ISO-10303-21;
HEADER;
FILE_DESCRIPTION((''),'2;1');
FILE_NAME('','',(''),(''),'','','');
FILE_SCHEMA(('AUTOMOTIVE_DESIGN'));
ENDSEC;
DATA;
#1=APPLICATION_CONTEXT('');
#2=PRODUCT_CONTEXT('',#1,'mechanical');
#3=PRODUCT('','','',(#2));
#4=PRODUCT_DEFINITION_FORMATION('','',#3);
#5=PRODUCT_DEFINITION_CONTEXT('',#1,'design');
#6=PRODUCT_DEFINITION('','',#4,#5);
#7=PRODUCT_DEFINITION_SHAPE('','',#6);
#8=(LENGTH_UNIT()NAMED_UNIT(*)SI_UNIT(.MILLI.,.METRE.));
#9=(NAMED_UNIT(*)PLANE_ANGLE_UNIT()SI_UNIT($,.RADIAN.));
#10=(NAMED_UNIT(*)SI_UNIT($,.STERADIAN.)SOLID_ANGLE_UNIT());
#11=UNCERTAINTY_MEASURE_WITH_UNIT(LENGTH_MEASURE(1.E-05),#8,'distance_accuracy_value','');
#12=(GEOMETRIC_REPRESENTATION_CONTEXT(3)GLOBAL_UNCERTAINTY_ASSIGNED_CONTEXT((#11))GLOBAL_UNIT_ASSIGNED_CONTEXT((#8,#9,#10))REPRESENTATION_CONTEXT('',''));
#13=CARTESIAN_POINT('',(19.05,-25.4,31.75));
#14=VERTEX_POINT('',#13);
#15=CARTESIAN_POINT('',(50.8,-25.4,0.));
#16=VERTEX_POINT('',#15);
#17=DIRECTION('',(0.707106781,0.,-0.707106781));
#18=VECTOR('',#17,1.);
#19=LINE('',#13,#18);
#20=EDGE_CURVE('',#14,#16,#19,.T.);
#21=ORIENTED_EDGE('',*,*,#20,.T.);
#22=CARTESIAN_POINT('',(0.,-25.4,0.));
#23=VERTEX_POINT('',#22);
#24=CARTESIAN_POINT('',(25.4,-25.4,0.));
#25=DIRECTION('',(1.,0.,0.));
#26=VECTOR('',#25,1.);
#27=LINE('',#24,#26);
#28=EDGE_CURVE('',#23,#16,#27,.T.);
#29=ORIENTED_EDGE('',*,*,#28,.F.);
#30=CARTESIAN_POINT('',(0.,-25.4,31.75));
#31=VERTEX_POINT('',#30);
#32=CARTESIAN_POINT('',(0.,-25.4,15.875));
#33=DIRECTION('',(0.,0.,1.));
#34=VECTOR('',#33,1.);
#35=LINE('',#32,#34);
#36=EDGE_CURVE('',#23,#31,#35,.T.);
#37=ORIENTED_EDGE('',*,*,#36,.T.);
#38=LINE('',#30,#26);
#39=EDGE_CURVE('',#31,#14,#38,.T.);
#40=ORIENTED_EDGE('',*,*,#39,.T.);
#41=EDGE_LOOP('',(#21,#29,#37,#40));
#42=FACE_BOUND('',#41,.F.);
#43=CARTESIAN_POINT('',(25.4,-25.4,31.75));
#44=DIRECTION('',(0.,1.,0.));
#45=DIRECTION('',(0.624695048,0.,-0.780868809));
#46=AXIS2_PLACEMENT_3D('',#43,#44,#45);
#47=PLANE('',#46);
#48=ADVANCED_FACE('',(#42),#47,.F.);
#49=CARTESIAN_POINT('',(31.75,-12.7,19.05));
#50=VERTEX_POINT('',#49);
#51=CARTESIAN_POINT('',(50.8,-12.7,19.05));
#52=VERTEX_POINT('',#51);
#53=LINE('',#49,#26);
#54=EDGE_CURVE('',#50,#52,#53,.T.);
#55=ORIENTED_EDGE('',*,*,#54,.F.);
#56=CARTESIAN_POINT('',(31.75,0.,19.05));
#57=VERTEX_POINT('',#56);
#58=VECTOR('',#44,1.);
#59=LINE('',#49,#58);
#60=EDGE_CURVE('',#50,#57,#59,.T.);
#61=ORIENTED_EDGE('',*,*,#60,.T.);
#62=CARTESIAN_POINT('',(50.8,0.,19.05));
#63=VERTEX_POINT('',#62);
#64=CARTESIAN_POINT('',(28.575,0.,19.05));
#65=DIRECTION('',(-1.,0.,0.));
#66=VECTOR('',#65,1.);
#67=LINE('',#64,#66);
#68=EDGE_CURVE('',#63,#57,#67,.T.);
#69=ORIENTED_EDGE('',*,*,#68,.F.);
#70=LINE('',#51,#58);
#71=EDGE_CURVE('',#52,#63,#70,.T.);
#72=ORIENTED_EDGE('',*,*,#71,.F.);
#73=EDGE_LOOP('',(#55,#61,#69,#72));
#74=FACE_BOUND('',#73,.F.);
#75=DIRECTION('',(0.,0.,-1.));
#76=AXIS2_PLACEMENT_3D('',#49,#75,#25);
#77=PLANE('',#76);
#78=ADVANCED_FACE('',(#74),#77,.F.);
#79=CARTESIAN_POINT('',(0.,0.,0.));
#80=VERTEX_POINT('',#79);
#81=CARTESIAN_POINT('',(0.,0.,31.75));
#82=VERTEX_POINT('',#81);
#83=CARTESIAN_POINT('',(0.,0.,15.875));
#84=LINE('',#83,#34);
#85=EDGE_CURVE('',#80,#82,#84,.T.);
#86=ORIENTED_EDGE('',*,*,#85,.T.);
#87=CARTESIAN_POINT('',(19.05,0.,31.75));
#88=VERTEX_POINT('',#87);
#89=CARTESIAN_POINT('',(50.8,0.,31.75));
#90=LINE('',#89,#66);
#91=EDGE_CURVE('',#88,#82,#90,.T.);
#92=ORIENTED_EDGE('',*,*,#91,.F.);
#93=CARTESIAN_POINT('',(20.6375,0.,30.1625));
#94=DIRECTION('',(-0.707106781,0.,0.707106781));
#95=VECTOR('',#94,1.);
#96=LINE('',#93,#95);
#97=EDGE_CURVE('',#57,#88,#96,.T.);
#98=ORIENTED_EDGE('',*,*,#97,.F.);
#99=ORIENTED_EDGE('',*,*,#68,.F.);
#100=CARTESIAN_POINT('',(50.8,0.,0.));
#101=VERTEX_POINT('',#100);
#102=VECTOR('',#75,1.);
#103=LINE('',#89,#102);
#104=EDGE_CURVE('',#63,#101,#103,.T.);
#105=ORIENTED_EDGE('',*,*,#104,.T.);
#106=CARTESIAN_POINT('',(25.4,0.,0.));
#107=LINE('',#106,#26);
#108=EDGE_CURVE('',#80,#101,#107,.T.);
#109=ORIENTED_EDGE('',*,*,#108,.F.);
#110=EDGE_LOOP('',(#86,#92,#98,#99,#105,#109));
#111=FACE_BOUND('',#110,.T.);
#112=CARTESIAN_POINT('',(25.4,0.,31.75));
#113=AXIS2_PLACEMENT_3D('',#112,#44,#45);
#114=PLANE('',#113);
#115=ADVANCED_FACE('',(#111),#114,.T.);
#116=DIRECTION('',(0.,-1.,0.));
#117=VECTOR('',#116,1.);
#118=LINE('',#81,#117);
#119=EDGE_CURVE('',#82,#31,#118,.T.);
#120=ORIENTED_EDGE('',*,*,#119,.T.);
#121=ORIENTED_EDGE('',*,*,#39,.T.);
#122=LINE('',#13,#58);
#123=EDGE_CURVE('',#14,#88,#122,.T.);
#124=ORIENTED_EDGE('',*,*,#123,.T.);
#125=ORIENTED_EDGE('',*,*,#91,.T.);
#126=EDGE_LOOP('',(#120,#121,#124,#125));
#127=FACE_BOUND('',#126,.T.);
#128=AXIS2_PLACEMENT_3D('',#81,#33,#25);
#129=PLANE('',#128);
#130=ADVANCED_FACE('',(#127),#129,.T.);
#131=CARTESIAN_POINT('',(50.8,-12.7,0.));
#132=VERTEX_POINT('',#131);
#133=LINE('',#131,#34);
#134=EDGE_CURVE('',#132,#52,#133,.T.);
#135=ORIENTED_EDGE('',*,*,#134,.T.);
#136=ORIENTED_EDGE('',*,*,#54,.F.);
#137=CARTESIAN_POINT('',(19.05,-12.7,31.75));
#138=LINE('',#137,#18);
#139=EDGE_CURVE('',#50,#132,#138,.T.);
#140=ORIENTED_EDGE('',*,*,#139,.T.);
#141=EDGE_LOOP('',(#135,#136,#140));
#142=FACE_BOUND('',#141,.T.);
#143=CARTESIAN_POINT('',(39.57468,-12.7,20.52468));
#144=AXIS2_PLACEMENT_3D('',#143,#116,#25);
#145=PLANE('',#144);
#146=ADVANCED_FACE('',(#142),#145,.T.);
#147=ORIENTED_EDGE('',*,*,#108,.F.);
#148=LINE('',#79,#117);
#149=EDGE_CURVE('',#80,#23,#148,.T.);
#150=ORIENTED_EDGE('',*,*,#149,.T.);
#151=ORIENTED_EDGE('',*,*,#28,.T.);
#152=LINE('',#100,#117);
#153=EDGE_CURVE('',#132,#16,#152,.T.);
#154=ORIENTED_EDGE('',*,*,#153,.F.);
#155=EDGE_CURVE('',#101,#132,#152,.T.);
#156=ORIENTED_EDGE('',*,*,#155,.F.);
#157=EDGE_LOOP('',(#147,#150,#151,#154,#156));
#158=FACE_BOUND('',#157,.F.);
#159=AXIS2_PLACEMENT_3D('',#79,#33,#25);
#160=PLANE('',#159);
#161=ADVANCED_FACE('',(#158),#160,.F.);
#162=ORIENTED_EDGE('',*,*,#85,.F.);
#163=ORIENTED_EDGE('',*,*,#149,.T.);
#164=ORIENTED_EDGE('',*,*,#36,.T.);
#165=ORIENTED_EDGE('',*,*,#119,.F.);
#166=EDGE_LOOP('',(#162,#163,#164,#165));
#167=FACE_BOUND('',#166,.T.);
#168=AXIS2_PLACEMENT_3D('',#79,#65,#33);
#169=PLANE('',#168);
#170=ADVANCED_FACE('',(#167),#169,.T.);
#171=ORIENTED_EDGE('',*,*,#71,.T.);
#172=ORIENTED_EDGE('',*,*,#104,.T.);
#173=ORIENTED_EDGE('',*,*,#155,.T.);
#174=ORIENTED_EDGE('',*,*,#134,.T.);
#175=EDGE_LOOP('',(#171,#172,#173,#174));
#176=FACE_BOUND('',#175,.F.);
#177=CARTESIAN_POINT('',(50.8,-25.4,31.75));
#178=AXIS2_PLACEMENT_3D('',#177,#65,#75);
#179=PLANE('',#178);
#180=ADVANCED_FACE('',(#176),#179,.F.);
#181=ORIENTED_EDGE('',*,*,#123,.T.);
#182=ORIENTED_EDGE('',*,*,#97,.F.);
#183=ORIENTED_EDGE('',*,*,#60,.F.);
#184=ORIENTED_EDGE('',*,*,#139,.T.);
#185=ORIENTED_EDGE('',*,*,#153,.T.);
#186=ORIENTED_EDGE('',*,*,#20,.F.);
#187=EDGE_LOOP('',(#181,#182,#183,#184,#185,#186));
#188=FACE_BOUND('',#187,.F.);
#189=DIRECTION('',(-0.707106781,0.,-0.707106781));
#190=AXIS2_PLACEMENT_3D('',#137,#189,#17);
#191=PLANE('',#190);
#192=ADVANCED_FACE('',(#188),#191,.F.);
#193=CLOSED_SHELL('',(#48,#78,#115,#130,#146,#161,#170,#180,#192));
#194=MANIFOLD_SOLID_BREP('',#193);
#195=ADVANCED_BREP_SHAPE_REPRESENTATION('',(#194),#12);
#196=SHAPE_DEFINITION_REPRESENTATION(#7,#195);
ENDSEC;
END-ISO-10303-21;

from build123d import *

# Parameters (mm, degrees)
F0_W      = 50.8
F0_H      = 31.75
F1_DEPTH  = 25.4
F3_DEPTH  = 25.4
F4_DEPTH  = 25.4
F6_DEPTH  = 25.4
F8_DEPTH  = 12.7
F10_DEPTH = 25.4


# Not quite as in the source:
# - a feature names something its author has since deleted; it is built from what else it names


with BuildPart() as f1:
    # F0 (on Front) → F1 (new body)
    with BuildSketch(Plane.XZ):
        with Locations((25.4, 15.875)):
            Rectangle(F0_W, F0_H)
    extrude(amount=F1_DEPTH)

    # F2 (on face) → F3 (cut)
    with BuildSketch(Plane.XZ.offset(25.4)):
        Polygon((25.4, 31.75), (50.8, 0), (50.8, 31.75), align=None)
    extrude(amount=-F3_DEPTH, mode=Mode.SUBTRACT)

    # F4 (add): a face of the model
    f4_faces = [f1.faces().sort_by_distance(p)[0] for p in [
        (38.1, -12.7, 15.875),
    ]]
    extrude(f4_faces, amount=F4_DEPTH)

    # F5 (on face) → F6 (cut)
    with BuildSketch(Plane.XZ.offset(25.4)):
        Polygon((45.2340677599, 47.6172542079), (25.4, 31.75), (50.8, 31.75), (50.8, 0), (70.6340677599, 15.8672542079), align=None)
    extrude(amount=-F6_DEPTH, mode=Mode.SUBTRACT)

    # F7 (on face) → F8 (cut)
    with BuildSketch(Plane.XZ.offset(25.4)):
        Polygon((19.05, 31.75), (50.8, 0), (50.8, 31.75), align=None)
    extrude(amount=-F8_DEPTH, mode=Mode.SUBTRACT)

    # F9 (on face) → F10 (cut)
    with BuildSketch(Plane.XZ.offset(12.7)):
        Polygon((31.75, 19.05), (50.8, 19.05), (50.8, 31.75), (19.05, 31.75), align=None)
    extrude(amount=-F10_DEPTH, mode=Mode.SUBTRACT)


solid = f1.part
